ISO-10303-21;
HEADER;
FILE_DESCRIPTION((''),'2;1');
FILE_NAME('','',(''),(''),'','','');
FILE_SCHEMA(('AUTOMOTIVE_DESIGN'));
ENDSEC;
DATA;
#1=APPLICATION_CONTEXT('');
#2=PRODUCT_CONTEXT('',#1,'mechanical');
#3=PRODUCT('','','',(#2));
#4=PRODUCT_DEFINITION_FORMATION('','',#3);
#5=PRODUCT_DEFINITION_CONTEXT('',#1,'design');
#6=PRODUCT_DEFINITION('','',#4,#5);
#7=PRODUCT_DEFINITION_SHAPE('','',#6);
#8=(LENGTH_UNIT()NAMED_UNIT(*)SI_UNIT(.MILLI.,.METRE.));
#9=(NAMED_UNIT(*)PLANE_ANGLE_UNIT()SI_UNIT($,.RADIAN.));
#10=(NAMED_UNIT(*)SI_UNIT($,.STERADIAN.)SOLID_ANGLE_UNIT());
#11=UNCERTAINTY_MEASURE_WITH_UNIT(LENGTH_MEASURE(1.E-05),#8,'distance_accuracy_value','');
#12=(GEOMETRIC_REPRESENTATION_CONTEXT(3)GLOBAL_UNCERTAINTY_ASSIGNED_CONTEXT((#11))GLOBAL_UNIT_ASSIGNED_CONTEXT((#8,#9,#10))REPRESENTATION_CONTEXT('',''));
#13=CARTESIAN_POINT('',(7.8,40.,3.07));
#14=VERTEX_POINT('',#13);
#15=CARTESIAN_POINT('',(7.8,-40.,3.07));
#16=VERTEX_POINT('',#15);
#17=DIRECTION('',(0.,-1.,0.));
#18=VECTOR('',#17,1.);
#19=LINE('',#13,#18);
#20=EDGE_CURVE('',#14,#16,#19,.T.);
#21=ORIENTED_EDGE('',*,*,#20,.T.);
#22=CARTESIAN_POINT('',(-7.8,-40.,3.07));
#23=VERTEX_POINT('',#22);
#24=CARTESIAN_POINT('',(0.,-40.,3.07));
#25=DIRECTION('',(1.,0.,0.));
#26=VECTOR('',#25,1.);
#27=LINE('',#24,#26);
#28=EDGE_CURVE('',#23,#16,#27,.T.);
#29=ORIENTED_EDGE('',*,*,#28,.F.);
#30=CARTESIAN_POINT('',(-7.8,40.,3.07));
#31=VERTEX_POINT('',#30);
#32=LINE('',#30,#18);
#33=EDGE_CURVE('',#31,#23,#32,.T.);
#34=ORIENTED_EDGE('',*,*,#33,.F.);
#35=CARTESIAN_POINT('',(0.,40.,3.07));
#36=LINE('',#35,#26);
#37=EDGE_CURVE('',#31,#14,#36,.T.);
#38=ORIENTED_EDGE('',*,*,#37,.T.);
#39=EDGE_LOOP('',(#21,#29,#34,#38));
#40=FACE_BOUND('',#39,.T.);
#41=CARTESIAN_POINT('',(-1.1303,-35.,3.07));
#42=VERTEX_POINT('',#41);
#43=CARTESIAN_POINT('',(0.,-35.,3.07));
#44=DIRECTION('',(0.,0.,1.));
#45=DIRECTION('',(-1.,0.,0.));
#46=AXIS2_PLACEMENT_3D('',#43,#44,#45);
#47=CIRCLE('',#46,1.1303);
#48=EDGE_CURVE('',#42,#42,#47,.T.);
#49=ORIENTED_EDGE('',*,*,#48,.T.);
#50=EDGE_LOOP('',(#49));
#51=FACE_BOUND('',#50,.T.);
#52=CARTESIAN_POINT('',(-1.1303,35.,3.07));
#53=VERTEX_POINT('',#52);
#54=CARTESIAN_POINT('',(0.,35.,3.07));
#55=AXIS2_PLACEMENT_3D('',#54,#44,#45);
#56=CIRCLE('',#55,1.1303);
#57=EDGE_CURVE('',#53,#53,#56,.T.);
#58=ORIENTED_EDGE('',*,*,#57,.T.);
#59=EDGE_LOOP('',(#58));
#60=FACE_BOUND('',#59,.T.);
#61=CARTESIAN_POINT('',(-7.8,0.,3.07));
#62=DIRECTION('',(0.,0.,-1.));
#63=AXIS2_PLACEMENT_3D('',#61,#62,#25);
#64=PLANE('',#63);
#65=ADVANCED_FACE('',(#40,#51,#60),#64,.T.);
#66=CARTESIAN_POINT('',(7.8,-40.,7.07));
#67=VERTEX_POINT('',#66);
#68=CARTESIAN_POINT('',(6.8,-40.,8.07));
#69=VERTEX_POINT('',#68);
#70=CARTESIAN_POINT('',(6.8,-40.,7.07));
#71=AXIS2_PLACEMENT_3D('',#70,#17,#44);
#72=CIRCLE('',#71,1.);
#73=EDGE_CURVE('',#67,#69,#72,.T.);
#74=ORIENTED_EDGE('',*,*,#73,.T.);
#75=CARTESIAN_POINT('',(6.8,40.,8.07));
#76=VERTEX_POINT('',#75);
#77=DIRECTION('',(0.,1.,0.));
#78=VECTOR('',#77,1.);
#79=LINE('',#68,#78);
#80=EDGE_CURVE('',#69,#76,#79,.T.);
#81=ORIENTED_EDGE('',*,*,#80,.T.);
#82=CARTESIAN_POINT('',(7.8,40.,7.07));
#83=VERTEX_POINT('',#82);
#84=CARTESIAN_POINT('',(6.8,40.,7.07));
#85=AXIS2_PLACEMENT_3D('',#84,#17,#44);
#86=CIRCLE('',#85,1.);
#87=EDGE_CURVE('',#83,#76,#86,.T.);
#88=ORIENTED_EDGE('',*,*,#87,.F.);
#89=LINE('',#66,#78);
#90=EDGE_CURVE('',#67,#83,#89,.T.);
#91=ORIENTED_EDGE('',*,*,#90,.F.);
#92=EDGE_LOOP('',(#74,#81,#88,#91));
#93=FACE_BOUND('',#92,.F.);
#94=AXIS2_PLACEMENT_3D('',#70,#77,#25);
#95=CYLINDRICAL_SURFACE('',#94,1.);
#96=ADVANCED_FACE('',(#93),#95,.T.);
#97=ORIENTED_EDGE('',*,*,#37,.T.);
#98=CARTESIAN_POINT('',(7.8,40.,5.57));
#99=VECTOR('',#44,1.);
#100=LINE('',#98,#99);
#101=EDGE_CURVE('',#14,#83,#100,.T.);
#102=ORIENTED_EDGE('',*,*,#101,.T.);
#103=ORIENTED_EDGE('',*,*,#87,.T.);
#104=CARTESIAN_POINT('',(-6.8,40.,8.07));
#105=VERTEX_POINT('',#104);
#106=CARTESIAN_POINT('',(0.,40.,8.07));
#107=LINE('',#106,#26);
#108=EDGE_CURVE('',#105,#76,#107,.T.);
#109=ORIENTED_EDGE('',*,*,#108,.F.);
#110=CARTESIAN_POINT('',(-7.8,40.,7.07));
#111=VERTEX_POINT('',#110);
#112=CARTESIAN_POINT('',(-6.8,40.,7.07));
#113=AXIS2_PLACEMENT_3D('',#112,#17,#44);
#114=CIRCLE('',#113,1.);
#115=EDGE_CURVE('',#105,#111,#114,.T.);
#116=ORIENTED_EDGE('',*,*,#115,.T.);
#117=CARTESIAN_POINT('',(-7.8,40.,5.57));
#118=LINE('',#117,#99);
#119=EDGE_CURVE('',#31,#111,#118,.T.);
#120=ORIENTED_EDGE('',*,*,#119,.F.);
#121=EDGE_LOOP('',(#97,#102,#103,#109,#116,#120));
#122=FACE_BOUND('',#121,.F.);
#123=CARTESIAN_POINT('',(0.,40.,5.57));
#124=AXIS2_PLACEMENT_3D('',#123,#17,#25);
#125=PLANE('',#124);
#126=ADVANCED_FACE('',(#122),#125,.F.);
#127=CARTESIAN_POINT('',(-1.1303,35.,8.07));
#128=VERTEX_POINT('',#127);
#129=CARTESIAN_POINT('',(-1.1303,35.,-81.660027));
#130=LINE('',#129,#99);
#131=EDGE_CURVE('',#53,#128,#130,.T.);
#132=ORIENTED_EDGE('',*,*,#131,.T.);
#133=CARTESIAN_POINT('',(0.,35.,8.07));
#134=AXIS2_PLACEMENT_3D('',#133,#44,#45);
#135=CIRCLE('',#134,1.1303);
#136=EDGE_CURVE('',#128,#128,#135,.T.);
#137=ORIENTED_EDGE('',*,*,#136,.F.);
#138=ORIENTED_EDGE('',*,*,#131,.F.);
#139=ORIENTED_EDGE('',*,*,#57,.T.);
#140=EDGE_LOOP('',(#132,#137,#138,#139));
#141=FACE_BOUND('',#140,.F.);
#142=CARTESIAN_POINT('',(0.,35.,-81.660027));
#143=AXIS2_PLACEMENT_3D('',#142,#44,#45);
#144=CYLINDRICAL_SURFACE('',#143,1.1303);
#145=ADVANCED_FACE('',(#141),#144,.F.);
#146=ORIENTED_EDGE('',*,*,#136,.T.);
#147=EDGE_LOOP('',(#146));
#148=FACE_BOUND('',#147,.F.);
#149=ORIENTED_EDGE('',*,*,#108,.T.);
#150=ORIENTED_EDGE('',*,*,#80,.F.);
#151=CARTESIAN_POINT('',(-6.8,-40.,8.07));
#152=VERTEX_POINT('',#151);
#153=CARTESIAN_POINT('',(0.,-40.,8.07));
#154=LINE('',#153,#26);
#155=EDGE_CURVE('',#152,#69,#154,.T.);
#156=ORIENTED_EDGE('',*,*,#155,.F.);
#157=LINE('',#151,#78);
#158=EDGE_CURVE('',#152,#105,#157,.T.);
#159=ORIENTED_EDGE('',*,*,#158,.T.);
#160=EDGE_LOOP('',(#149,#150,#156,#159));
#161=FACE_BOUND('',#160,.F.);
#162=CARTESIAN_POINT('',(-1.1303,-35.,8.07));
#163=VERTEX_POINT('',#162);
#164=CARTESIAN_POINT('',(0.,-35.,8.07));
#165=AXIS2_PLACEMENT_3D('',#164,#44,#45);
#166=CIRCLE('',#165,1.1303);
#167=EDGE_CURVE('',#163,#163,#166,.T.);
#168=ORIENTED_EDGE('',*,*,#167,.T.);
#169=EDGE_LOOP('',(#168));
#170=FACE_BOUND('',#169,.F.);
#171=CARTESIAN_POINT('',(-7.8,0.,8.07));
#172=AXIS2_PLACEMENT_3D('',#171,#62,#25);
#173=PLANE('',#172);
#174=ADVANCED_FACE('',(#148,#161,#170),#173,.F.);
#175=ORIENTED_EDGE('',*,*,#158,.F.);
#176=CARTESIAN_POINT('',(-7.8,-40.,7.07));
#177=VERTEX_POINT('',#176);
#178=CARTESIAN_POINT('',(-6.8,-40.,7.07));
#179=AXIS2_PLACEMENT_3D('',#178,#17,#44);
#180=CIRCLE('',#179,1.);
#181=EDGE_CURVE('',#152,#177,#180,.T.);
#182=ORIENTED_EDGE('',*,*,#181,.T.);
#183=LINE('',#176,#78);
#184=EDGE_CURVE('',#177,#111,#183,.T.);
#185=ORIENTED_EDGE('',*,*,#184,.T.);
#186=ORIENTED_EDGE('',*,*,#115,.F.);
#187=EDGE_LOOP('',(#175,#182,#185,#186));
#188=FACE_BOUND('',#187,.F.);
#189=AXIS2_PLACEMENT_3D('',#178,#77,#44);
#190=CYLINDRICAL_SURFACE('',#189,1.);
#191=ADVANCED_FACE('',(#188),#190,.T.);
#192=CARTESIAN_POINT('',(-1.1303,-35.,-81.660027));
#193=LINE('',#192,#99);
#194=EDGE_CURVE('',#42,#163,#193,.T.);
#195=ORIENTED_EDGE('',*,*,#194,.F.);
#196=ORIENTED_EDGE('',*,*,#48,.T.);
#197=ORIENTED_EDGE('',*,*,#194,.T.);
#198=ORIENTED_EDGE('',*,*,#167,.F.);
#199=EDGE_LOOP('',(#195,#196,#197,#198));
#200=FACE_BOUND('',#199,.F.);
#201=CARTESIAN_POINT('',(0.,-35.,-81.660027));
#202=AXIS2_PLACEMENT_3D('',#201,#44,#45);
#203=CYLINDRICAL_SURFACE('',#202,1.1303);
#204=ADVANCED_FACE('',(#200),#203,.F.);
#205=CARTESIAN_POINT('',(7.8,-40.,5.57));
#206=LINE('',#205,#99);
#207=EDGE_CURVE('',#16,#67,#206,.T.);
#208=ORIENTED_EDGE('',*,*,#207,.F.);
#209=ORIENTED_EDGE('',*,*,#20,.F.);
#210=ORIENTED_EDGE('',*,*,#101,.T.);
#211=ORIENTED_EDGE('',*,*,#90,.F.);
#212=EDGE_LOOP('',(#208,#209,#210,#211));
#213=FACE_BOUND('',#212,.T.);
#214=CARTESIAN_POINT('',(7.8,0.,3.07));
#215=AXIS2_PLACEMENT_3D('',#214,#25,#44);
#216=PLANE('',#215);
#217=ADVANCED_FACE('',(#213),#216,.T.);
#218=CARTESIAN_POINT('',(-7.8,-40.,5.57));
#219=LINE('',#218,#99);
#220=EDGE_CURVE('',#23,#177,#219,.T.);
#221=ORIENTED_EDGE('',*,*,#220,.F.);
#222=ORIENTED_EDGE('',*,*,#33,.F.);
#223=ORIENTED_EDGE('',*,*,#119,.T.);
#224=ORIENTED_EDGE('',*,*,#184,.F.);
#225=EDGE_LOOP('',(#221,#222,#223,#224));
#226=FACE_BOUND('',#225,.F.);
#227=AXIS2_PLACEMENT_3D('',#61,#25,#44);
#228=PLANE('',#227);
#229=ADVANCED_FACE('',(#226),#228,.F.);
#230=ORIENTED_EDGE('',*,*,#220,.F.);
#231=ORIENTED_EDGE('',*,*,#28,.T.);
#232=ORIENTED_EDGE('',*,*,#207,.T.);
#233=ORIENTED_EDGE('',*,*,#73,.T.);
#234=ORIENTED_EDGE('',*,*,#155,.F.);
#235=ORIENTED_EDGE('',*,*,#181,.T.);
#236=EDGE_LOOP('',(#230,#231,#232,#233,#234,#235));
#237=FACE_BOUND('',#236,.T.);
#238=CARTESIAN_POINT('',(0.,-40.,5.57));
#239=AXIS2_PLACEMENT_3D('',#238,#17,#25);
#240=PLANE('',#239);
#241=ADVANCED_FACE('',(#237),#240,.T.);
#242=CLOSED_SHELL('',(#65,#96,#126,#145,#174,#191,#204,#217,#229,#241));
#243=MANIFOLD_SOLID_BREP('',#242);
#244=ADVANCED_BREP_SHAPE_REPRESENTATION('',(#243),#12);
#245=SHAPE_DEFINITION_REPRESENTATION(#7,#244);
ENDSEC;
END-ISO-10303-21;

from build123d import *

# Parameters (mm, degrees)
F0_W     = 15.6
F0_H     = 5
F1_DEPTH = 40
F2_R     = 1
F3_R     = 1
F8_D     = 2.2606
F10_D    = 2.2606


# Not quite as in the source:
# - a feature of the source that left no trace in its solid (it failed there, or was rolled back) is left out


with BuildPart() as f1:
    # F0 (on Front) → F1 (new body, symmetric)
    with BuildSketch(Plane.XZ):
        with Locations((0, 5.57)):
            Rectangle(F0_W, F0_H)
    extrude(amount=F1_DEPTH, both=True)

    # F2
    f2_edges = [f1.edges().sort_by_distance(p)[0] for p in [
        (7.8, 0, 8.07),
    ]]
    fillet(f2_edges, radius=F2_R)

    # F3
    f3_edges = [f1.edges().sort_by_distance(p)[0] for p in [
        (-7.8, 0, 8.07),
    ]]
    fillet(f3_edges, radius=F3_R)

    # F8 (through all)
    with Locations(Plane(origin=(0, 0, 0), x_dir=(1, 0, 0), z_dir=(0, 0, -1))):
        with Locations((0, 35)):
            Hole(F8_D / 2)

    # F10 (through all)
    with Locations(Plane(origin=(0, 0, 0), x_dir=(1, 0, 0), z_dir=(0, 0, -1))):
        with Locations((0, -35)):
            Hole(F10_D / 2)


solid = f1.part
